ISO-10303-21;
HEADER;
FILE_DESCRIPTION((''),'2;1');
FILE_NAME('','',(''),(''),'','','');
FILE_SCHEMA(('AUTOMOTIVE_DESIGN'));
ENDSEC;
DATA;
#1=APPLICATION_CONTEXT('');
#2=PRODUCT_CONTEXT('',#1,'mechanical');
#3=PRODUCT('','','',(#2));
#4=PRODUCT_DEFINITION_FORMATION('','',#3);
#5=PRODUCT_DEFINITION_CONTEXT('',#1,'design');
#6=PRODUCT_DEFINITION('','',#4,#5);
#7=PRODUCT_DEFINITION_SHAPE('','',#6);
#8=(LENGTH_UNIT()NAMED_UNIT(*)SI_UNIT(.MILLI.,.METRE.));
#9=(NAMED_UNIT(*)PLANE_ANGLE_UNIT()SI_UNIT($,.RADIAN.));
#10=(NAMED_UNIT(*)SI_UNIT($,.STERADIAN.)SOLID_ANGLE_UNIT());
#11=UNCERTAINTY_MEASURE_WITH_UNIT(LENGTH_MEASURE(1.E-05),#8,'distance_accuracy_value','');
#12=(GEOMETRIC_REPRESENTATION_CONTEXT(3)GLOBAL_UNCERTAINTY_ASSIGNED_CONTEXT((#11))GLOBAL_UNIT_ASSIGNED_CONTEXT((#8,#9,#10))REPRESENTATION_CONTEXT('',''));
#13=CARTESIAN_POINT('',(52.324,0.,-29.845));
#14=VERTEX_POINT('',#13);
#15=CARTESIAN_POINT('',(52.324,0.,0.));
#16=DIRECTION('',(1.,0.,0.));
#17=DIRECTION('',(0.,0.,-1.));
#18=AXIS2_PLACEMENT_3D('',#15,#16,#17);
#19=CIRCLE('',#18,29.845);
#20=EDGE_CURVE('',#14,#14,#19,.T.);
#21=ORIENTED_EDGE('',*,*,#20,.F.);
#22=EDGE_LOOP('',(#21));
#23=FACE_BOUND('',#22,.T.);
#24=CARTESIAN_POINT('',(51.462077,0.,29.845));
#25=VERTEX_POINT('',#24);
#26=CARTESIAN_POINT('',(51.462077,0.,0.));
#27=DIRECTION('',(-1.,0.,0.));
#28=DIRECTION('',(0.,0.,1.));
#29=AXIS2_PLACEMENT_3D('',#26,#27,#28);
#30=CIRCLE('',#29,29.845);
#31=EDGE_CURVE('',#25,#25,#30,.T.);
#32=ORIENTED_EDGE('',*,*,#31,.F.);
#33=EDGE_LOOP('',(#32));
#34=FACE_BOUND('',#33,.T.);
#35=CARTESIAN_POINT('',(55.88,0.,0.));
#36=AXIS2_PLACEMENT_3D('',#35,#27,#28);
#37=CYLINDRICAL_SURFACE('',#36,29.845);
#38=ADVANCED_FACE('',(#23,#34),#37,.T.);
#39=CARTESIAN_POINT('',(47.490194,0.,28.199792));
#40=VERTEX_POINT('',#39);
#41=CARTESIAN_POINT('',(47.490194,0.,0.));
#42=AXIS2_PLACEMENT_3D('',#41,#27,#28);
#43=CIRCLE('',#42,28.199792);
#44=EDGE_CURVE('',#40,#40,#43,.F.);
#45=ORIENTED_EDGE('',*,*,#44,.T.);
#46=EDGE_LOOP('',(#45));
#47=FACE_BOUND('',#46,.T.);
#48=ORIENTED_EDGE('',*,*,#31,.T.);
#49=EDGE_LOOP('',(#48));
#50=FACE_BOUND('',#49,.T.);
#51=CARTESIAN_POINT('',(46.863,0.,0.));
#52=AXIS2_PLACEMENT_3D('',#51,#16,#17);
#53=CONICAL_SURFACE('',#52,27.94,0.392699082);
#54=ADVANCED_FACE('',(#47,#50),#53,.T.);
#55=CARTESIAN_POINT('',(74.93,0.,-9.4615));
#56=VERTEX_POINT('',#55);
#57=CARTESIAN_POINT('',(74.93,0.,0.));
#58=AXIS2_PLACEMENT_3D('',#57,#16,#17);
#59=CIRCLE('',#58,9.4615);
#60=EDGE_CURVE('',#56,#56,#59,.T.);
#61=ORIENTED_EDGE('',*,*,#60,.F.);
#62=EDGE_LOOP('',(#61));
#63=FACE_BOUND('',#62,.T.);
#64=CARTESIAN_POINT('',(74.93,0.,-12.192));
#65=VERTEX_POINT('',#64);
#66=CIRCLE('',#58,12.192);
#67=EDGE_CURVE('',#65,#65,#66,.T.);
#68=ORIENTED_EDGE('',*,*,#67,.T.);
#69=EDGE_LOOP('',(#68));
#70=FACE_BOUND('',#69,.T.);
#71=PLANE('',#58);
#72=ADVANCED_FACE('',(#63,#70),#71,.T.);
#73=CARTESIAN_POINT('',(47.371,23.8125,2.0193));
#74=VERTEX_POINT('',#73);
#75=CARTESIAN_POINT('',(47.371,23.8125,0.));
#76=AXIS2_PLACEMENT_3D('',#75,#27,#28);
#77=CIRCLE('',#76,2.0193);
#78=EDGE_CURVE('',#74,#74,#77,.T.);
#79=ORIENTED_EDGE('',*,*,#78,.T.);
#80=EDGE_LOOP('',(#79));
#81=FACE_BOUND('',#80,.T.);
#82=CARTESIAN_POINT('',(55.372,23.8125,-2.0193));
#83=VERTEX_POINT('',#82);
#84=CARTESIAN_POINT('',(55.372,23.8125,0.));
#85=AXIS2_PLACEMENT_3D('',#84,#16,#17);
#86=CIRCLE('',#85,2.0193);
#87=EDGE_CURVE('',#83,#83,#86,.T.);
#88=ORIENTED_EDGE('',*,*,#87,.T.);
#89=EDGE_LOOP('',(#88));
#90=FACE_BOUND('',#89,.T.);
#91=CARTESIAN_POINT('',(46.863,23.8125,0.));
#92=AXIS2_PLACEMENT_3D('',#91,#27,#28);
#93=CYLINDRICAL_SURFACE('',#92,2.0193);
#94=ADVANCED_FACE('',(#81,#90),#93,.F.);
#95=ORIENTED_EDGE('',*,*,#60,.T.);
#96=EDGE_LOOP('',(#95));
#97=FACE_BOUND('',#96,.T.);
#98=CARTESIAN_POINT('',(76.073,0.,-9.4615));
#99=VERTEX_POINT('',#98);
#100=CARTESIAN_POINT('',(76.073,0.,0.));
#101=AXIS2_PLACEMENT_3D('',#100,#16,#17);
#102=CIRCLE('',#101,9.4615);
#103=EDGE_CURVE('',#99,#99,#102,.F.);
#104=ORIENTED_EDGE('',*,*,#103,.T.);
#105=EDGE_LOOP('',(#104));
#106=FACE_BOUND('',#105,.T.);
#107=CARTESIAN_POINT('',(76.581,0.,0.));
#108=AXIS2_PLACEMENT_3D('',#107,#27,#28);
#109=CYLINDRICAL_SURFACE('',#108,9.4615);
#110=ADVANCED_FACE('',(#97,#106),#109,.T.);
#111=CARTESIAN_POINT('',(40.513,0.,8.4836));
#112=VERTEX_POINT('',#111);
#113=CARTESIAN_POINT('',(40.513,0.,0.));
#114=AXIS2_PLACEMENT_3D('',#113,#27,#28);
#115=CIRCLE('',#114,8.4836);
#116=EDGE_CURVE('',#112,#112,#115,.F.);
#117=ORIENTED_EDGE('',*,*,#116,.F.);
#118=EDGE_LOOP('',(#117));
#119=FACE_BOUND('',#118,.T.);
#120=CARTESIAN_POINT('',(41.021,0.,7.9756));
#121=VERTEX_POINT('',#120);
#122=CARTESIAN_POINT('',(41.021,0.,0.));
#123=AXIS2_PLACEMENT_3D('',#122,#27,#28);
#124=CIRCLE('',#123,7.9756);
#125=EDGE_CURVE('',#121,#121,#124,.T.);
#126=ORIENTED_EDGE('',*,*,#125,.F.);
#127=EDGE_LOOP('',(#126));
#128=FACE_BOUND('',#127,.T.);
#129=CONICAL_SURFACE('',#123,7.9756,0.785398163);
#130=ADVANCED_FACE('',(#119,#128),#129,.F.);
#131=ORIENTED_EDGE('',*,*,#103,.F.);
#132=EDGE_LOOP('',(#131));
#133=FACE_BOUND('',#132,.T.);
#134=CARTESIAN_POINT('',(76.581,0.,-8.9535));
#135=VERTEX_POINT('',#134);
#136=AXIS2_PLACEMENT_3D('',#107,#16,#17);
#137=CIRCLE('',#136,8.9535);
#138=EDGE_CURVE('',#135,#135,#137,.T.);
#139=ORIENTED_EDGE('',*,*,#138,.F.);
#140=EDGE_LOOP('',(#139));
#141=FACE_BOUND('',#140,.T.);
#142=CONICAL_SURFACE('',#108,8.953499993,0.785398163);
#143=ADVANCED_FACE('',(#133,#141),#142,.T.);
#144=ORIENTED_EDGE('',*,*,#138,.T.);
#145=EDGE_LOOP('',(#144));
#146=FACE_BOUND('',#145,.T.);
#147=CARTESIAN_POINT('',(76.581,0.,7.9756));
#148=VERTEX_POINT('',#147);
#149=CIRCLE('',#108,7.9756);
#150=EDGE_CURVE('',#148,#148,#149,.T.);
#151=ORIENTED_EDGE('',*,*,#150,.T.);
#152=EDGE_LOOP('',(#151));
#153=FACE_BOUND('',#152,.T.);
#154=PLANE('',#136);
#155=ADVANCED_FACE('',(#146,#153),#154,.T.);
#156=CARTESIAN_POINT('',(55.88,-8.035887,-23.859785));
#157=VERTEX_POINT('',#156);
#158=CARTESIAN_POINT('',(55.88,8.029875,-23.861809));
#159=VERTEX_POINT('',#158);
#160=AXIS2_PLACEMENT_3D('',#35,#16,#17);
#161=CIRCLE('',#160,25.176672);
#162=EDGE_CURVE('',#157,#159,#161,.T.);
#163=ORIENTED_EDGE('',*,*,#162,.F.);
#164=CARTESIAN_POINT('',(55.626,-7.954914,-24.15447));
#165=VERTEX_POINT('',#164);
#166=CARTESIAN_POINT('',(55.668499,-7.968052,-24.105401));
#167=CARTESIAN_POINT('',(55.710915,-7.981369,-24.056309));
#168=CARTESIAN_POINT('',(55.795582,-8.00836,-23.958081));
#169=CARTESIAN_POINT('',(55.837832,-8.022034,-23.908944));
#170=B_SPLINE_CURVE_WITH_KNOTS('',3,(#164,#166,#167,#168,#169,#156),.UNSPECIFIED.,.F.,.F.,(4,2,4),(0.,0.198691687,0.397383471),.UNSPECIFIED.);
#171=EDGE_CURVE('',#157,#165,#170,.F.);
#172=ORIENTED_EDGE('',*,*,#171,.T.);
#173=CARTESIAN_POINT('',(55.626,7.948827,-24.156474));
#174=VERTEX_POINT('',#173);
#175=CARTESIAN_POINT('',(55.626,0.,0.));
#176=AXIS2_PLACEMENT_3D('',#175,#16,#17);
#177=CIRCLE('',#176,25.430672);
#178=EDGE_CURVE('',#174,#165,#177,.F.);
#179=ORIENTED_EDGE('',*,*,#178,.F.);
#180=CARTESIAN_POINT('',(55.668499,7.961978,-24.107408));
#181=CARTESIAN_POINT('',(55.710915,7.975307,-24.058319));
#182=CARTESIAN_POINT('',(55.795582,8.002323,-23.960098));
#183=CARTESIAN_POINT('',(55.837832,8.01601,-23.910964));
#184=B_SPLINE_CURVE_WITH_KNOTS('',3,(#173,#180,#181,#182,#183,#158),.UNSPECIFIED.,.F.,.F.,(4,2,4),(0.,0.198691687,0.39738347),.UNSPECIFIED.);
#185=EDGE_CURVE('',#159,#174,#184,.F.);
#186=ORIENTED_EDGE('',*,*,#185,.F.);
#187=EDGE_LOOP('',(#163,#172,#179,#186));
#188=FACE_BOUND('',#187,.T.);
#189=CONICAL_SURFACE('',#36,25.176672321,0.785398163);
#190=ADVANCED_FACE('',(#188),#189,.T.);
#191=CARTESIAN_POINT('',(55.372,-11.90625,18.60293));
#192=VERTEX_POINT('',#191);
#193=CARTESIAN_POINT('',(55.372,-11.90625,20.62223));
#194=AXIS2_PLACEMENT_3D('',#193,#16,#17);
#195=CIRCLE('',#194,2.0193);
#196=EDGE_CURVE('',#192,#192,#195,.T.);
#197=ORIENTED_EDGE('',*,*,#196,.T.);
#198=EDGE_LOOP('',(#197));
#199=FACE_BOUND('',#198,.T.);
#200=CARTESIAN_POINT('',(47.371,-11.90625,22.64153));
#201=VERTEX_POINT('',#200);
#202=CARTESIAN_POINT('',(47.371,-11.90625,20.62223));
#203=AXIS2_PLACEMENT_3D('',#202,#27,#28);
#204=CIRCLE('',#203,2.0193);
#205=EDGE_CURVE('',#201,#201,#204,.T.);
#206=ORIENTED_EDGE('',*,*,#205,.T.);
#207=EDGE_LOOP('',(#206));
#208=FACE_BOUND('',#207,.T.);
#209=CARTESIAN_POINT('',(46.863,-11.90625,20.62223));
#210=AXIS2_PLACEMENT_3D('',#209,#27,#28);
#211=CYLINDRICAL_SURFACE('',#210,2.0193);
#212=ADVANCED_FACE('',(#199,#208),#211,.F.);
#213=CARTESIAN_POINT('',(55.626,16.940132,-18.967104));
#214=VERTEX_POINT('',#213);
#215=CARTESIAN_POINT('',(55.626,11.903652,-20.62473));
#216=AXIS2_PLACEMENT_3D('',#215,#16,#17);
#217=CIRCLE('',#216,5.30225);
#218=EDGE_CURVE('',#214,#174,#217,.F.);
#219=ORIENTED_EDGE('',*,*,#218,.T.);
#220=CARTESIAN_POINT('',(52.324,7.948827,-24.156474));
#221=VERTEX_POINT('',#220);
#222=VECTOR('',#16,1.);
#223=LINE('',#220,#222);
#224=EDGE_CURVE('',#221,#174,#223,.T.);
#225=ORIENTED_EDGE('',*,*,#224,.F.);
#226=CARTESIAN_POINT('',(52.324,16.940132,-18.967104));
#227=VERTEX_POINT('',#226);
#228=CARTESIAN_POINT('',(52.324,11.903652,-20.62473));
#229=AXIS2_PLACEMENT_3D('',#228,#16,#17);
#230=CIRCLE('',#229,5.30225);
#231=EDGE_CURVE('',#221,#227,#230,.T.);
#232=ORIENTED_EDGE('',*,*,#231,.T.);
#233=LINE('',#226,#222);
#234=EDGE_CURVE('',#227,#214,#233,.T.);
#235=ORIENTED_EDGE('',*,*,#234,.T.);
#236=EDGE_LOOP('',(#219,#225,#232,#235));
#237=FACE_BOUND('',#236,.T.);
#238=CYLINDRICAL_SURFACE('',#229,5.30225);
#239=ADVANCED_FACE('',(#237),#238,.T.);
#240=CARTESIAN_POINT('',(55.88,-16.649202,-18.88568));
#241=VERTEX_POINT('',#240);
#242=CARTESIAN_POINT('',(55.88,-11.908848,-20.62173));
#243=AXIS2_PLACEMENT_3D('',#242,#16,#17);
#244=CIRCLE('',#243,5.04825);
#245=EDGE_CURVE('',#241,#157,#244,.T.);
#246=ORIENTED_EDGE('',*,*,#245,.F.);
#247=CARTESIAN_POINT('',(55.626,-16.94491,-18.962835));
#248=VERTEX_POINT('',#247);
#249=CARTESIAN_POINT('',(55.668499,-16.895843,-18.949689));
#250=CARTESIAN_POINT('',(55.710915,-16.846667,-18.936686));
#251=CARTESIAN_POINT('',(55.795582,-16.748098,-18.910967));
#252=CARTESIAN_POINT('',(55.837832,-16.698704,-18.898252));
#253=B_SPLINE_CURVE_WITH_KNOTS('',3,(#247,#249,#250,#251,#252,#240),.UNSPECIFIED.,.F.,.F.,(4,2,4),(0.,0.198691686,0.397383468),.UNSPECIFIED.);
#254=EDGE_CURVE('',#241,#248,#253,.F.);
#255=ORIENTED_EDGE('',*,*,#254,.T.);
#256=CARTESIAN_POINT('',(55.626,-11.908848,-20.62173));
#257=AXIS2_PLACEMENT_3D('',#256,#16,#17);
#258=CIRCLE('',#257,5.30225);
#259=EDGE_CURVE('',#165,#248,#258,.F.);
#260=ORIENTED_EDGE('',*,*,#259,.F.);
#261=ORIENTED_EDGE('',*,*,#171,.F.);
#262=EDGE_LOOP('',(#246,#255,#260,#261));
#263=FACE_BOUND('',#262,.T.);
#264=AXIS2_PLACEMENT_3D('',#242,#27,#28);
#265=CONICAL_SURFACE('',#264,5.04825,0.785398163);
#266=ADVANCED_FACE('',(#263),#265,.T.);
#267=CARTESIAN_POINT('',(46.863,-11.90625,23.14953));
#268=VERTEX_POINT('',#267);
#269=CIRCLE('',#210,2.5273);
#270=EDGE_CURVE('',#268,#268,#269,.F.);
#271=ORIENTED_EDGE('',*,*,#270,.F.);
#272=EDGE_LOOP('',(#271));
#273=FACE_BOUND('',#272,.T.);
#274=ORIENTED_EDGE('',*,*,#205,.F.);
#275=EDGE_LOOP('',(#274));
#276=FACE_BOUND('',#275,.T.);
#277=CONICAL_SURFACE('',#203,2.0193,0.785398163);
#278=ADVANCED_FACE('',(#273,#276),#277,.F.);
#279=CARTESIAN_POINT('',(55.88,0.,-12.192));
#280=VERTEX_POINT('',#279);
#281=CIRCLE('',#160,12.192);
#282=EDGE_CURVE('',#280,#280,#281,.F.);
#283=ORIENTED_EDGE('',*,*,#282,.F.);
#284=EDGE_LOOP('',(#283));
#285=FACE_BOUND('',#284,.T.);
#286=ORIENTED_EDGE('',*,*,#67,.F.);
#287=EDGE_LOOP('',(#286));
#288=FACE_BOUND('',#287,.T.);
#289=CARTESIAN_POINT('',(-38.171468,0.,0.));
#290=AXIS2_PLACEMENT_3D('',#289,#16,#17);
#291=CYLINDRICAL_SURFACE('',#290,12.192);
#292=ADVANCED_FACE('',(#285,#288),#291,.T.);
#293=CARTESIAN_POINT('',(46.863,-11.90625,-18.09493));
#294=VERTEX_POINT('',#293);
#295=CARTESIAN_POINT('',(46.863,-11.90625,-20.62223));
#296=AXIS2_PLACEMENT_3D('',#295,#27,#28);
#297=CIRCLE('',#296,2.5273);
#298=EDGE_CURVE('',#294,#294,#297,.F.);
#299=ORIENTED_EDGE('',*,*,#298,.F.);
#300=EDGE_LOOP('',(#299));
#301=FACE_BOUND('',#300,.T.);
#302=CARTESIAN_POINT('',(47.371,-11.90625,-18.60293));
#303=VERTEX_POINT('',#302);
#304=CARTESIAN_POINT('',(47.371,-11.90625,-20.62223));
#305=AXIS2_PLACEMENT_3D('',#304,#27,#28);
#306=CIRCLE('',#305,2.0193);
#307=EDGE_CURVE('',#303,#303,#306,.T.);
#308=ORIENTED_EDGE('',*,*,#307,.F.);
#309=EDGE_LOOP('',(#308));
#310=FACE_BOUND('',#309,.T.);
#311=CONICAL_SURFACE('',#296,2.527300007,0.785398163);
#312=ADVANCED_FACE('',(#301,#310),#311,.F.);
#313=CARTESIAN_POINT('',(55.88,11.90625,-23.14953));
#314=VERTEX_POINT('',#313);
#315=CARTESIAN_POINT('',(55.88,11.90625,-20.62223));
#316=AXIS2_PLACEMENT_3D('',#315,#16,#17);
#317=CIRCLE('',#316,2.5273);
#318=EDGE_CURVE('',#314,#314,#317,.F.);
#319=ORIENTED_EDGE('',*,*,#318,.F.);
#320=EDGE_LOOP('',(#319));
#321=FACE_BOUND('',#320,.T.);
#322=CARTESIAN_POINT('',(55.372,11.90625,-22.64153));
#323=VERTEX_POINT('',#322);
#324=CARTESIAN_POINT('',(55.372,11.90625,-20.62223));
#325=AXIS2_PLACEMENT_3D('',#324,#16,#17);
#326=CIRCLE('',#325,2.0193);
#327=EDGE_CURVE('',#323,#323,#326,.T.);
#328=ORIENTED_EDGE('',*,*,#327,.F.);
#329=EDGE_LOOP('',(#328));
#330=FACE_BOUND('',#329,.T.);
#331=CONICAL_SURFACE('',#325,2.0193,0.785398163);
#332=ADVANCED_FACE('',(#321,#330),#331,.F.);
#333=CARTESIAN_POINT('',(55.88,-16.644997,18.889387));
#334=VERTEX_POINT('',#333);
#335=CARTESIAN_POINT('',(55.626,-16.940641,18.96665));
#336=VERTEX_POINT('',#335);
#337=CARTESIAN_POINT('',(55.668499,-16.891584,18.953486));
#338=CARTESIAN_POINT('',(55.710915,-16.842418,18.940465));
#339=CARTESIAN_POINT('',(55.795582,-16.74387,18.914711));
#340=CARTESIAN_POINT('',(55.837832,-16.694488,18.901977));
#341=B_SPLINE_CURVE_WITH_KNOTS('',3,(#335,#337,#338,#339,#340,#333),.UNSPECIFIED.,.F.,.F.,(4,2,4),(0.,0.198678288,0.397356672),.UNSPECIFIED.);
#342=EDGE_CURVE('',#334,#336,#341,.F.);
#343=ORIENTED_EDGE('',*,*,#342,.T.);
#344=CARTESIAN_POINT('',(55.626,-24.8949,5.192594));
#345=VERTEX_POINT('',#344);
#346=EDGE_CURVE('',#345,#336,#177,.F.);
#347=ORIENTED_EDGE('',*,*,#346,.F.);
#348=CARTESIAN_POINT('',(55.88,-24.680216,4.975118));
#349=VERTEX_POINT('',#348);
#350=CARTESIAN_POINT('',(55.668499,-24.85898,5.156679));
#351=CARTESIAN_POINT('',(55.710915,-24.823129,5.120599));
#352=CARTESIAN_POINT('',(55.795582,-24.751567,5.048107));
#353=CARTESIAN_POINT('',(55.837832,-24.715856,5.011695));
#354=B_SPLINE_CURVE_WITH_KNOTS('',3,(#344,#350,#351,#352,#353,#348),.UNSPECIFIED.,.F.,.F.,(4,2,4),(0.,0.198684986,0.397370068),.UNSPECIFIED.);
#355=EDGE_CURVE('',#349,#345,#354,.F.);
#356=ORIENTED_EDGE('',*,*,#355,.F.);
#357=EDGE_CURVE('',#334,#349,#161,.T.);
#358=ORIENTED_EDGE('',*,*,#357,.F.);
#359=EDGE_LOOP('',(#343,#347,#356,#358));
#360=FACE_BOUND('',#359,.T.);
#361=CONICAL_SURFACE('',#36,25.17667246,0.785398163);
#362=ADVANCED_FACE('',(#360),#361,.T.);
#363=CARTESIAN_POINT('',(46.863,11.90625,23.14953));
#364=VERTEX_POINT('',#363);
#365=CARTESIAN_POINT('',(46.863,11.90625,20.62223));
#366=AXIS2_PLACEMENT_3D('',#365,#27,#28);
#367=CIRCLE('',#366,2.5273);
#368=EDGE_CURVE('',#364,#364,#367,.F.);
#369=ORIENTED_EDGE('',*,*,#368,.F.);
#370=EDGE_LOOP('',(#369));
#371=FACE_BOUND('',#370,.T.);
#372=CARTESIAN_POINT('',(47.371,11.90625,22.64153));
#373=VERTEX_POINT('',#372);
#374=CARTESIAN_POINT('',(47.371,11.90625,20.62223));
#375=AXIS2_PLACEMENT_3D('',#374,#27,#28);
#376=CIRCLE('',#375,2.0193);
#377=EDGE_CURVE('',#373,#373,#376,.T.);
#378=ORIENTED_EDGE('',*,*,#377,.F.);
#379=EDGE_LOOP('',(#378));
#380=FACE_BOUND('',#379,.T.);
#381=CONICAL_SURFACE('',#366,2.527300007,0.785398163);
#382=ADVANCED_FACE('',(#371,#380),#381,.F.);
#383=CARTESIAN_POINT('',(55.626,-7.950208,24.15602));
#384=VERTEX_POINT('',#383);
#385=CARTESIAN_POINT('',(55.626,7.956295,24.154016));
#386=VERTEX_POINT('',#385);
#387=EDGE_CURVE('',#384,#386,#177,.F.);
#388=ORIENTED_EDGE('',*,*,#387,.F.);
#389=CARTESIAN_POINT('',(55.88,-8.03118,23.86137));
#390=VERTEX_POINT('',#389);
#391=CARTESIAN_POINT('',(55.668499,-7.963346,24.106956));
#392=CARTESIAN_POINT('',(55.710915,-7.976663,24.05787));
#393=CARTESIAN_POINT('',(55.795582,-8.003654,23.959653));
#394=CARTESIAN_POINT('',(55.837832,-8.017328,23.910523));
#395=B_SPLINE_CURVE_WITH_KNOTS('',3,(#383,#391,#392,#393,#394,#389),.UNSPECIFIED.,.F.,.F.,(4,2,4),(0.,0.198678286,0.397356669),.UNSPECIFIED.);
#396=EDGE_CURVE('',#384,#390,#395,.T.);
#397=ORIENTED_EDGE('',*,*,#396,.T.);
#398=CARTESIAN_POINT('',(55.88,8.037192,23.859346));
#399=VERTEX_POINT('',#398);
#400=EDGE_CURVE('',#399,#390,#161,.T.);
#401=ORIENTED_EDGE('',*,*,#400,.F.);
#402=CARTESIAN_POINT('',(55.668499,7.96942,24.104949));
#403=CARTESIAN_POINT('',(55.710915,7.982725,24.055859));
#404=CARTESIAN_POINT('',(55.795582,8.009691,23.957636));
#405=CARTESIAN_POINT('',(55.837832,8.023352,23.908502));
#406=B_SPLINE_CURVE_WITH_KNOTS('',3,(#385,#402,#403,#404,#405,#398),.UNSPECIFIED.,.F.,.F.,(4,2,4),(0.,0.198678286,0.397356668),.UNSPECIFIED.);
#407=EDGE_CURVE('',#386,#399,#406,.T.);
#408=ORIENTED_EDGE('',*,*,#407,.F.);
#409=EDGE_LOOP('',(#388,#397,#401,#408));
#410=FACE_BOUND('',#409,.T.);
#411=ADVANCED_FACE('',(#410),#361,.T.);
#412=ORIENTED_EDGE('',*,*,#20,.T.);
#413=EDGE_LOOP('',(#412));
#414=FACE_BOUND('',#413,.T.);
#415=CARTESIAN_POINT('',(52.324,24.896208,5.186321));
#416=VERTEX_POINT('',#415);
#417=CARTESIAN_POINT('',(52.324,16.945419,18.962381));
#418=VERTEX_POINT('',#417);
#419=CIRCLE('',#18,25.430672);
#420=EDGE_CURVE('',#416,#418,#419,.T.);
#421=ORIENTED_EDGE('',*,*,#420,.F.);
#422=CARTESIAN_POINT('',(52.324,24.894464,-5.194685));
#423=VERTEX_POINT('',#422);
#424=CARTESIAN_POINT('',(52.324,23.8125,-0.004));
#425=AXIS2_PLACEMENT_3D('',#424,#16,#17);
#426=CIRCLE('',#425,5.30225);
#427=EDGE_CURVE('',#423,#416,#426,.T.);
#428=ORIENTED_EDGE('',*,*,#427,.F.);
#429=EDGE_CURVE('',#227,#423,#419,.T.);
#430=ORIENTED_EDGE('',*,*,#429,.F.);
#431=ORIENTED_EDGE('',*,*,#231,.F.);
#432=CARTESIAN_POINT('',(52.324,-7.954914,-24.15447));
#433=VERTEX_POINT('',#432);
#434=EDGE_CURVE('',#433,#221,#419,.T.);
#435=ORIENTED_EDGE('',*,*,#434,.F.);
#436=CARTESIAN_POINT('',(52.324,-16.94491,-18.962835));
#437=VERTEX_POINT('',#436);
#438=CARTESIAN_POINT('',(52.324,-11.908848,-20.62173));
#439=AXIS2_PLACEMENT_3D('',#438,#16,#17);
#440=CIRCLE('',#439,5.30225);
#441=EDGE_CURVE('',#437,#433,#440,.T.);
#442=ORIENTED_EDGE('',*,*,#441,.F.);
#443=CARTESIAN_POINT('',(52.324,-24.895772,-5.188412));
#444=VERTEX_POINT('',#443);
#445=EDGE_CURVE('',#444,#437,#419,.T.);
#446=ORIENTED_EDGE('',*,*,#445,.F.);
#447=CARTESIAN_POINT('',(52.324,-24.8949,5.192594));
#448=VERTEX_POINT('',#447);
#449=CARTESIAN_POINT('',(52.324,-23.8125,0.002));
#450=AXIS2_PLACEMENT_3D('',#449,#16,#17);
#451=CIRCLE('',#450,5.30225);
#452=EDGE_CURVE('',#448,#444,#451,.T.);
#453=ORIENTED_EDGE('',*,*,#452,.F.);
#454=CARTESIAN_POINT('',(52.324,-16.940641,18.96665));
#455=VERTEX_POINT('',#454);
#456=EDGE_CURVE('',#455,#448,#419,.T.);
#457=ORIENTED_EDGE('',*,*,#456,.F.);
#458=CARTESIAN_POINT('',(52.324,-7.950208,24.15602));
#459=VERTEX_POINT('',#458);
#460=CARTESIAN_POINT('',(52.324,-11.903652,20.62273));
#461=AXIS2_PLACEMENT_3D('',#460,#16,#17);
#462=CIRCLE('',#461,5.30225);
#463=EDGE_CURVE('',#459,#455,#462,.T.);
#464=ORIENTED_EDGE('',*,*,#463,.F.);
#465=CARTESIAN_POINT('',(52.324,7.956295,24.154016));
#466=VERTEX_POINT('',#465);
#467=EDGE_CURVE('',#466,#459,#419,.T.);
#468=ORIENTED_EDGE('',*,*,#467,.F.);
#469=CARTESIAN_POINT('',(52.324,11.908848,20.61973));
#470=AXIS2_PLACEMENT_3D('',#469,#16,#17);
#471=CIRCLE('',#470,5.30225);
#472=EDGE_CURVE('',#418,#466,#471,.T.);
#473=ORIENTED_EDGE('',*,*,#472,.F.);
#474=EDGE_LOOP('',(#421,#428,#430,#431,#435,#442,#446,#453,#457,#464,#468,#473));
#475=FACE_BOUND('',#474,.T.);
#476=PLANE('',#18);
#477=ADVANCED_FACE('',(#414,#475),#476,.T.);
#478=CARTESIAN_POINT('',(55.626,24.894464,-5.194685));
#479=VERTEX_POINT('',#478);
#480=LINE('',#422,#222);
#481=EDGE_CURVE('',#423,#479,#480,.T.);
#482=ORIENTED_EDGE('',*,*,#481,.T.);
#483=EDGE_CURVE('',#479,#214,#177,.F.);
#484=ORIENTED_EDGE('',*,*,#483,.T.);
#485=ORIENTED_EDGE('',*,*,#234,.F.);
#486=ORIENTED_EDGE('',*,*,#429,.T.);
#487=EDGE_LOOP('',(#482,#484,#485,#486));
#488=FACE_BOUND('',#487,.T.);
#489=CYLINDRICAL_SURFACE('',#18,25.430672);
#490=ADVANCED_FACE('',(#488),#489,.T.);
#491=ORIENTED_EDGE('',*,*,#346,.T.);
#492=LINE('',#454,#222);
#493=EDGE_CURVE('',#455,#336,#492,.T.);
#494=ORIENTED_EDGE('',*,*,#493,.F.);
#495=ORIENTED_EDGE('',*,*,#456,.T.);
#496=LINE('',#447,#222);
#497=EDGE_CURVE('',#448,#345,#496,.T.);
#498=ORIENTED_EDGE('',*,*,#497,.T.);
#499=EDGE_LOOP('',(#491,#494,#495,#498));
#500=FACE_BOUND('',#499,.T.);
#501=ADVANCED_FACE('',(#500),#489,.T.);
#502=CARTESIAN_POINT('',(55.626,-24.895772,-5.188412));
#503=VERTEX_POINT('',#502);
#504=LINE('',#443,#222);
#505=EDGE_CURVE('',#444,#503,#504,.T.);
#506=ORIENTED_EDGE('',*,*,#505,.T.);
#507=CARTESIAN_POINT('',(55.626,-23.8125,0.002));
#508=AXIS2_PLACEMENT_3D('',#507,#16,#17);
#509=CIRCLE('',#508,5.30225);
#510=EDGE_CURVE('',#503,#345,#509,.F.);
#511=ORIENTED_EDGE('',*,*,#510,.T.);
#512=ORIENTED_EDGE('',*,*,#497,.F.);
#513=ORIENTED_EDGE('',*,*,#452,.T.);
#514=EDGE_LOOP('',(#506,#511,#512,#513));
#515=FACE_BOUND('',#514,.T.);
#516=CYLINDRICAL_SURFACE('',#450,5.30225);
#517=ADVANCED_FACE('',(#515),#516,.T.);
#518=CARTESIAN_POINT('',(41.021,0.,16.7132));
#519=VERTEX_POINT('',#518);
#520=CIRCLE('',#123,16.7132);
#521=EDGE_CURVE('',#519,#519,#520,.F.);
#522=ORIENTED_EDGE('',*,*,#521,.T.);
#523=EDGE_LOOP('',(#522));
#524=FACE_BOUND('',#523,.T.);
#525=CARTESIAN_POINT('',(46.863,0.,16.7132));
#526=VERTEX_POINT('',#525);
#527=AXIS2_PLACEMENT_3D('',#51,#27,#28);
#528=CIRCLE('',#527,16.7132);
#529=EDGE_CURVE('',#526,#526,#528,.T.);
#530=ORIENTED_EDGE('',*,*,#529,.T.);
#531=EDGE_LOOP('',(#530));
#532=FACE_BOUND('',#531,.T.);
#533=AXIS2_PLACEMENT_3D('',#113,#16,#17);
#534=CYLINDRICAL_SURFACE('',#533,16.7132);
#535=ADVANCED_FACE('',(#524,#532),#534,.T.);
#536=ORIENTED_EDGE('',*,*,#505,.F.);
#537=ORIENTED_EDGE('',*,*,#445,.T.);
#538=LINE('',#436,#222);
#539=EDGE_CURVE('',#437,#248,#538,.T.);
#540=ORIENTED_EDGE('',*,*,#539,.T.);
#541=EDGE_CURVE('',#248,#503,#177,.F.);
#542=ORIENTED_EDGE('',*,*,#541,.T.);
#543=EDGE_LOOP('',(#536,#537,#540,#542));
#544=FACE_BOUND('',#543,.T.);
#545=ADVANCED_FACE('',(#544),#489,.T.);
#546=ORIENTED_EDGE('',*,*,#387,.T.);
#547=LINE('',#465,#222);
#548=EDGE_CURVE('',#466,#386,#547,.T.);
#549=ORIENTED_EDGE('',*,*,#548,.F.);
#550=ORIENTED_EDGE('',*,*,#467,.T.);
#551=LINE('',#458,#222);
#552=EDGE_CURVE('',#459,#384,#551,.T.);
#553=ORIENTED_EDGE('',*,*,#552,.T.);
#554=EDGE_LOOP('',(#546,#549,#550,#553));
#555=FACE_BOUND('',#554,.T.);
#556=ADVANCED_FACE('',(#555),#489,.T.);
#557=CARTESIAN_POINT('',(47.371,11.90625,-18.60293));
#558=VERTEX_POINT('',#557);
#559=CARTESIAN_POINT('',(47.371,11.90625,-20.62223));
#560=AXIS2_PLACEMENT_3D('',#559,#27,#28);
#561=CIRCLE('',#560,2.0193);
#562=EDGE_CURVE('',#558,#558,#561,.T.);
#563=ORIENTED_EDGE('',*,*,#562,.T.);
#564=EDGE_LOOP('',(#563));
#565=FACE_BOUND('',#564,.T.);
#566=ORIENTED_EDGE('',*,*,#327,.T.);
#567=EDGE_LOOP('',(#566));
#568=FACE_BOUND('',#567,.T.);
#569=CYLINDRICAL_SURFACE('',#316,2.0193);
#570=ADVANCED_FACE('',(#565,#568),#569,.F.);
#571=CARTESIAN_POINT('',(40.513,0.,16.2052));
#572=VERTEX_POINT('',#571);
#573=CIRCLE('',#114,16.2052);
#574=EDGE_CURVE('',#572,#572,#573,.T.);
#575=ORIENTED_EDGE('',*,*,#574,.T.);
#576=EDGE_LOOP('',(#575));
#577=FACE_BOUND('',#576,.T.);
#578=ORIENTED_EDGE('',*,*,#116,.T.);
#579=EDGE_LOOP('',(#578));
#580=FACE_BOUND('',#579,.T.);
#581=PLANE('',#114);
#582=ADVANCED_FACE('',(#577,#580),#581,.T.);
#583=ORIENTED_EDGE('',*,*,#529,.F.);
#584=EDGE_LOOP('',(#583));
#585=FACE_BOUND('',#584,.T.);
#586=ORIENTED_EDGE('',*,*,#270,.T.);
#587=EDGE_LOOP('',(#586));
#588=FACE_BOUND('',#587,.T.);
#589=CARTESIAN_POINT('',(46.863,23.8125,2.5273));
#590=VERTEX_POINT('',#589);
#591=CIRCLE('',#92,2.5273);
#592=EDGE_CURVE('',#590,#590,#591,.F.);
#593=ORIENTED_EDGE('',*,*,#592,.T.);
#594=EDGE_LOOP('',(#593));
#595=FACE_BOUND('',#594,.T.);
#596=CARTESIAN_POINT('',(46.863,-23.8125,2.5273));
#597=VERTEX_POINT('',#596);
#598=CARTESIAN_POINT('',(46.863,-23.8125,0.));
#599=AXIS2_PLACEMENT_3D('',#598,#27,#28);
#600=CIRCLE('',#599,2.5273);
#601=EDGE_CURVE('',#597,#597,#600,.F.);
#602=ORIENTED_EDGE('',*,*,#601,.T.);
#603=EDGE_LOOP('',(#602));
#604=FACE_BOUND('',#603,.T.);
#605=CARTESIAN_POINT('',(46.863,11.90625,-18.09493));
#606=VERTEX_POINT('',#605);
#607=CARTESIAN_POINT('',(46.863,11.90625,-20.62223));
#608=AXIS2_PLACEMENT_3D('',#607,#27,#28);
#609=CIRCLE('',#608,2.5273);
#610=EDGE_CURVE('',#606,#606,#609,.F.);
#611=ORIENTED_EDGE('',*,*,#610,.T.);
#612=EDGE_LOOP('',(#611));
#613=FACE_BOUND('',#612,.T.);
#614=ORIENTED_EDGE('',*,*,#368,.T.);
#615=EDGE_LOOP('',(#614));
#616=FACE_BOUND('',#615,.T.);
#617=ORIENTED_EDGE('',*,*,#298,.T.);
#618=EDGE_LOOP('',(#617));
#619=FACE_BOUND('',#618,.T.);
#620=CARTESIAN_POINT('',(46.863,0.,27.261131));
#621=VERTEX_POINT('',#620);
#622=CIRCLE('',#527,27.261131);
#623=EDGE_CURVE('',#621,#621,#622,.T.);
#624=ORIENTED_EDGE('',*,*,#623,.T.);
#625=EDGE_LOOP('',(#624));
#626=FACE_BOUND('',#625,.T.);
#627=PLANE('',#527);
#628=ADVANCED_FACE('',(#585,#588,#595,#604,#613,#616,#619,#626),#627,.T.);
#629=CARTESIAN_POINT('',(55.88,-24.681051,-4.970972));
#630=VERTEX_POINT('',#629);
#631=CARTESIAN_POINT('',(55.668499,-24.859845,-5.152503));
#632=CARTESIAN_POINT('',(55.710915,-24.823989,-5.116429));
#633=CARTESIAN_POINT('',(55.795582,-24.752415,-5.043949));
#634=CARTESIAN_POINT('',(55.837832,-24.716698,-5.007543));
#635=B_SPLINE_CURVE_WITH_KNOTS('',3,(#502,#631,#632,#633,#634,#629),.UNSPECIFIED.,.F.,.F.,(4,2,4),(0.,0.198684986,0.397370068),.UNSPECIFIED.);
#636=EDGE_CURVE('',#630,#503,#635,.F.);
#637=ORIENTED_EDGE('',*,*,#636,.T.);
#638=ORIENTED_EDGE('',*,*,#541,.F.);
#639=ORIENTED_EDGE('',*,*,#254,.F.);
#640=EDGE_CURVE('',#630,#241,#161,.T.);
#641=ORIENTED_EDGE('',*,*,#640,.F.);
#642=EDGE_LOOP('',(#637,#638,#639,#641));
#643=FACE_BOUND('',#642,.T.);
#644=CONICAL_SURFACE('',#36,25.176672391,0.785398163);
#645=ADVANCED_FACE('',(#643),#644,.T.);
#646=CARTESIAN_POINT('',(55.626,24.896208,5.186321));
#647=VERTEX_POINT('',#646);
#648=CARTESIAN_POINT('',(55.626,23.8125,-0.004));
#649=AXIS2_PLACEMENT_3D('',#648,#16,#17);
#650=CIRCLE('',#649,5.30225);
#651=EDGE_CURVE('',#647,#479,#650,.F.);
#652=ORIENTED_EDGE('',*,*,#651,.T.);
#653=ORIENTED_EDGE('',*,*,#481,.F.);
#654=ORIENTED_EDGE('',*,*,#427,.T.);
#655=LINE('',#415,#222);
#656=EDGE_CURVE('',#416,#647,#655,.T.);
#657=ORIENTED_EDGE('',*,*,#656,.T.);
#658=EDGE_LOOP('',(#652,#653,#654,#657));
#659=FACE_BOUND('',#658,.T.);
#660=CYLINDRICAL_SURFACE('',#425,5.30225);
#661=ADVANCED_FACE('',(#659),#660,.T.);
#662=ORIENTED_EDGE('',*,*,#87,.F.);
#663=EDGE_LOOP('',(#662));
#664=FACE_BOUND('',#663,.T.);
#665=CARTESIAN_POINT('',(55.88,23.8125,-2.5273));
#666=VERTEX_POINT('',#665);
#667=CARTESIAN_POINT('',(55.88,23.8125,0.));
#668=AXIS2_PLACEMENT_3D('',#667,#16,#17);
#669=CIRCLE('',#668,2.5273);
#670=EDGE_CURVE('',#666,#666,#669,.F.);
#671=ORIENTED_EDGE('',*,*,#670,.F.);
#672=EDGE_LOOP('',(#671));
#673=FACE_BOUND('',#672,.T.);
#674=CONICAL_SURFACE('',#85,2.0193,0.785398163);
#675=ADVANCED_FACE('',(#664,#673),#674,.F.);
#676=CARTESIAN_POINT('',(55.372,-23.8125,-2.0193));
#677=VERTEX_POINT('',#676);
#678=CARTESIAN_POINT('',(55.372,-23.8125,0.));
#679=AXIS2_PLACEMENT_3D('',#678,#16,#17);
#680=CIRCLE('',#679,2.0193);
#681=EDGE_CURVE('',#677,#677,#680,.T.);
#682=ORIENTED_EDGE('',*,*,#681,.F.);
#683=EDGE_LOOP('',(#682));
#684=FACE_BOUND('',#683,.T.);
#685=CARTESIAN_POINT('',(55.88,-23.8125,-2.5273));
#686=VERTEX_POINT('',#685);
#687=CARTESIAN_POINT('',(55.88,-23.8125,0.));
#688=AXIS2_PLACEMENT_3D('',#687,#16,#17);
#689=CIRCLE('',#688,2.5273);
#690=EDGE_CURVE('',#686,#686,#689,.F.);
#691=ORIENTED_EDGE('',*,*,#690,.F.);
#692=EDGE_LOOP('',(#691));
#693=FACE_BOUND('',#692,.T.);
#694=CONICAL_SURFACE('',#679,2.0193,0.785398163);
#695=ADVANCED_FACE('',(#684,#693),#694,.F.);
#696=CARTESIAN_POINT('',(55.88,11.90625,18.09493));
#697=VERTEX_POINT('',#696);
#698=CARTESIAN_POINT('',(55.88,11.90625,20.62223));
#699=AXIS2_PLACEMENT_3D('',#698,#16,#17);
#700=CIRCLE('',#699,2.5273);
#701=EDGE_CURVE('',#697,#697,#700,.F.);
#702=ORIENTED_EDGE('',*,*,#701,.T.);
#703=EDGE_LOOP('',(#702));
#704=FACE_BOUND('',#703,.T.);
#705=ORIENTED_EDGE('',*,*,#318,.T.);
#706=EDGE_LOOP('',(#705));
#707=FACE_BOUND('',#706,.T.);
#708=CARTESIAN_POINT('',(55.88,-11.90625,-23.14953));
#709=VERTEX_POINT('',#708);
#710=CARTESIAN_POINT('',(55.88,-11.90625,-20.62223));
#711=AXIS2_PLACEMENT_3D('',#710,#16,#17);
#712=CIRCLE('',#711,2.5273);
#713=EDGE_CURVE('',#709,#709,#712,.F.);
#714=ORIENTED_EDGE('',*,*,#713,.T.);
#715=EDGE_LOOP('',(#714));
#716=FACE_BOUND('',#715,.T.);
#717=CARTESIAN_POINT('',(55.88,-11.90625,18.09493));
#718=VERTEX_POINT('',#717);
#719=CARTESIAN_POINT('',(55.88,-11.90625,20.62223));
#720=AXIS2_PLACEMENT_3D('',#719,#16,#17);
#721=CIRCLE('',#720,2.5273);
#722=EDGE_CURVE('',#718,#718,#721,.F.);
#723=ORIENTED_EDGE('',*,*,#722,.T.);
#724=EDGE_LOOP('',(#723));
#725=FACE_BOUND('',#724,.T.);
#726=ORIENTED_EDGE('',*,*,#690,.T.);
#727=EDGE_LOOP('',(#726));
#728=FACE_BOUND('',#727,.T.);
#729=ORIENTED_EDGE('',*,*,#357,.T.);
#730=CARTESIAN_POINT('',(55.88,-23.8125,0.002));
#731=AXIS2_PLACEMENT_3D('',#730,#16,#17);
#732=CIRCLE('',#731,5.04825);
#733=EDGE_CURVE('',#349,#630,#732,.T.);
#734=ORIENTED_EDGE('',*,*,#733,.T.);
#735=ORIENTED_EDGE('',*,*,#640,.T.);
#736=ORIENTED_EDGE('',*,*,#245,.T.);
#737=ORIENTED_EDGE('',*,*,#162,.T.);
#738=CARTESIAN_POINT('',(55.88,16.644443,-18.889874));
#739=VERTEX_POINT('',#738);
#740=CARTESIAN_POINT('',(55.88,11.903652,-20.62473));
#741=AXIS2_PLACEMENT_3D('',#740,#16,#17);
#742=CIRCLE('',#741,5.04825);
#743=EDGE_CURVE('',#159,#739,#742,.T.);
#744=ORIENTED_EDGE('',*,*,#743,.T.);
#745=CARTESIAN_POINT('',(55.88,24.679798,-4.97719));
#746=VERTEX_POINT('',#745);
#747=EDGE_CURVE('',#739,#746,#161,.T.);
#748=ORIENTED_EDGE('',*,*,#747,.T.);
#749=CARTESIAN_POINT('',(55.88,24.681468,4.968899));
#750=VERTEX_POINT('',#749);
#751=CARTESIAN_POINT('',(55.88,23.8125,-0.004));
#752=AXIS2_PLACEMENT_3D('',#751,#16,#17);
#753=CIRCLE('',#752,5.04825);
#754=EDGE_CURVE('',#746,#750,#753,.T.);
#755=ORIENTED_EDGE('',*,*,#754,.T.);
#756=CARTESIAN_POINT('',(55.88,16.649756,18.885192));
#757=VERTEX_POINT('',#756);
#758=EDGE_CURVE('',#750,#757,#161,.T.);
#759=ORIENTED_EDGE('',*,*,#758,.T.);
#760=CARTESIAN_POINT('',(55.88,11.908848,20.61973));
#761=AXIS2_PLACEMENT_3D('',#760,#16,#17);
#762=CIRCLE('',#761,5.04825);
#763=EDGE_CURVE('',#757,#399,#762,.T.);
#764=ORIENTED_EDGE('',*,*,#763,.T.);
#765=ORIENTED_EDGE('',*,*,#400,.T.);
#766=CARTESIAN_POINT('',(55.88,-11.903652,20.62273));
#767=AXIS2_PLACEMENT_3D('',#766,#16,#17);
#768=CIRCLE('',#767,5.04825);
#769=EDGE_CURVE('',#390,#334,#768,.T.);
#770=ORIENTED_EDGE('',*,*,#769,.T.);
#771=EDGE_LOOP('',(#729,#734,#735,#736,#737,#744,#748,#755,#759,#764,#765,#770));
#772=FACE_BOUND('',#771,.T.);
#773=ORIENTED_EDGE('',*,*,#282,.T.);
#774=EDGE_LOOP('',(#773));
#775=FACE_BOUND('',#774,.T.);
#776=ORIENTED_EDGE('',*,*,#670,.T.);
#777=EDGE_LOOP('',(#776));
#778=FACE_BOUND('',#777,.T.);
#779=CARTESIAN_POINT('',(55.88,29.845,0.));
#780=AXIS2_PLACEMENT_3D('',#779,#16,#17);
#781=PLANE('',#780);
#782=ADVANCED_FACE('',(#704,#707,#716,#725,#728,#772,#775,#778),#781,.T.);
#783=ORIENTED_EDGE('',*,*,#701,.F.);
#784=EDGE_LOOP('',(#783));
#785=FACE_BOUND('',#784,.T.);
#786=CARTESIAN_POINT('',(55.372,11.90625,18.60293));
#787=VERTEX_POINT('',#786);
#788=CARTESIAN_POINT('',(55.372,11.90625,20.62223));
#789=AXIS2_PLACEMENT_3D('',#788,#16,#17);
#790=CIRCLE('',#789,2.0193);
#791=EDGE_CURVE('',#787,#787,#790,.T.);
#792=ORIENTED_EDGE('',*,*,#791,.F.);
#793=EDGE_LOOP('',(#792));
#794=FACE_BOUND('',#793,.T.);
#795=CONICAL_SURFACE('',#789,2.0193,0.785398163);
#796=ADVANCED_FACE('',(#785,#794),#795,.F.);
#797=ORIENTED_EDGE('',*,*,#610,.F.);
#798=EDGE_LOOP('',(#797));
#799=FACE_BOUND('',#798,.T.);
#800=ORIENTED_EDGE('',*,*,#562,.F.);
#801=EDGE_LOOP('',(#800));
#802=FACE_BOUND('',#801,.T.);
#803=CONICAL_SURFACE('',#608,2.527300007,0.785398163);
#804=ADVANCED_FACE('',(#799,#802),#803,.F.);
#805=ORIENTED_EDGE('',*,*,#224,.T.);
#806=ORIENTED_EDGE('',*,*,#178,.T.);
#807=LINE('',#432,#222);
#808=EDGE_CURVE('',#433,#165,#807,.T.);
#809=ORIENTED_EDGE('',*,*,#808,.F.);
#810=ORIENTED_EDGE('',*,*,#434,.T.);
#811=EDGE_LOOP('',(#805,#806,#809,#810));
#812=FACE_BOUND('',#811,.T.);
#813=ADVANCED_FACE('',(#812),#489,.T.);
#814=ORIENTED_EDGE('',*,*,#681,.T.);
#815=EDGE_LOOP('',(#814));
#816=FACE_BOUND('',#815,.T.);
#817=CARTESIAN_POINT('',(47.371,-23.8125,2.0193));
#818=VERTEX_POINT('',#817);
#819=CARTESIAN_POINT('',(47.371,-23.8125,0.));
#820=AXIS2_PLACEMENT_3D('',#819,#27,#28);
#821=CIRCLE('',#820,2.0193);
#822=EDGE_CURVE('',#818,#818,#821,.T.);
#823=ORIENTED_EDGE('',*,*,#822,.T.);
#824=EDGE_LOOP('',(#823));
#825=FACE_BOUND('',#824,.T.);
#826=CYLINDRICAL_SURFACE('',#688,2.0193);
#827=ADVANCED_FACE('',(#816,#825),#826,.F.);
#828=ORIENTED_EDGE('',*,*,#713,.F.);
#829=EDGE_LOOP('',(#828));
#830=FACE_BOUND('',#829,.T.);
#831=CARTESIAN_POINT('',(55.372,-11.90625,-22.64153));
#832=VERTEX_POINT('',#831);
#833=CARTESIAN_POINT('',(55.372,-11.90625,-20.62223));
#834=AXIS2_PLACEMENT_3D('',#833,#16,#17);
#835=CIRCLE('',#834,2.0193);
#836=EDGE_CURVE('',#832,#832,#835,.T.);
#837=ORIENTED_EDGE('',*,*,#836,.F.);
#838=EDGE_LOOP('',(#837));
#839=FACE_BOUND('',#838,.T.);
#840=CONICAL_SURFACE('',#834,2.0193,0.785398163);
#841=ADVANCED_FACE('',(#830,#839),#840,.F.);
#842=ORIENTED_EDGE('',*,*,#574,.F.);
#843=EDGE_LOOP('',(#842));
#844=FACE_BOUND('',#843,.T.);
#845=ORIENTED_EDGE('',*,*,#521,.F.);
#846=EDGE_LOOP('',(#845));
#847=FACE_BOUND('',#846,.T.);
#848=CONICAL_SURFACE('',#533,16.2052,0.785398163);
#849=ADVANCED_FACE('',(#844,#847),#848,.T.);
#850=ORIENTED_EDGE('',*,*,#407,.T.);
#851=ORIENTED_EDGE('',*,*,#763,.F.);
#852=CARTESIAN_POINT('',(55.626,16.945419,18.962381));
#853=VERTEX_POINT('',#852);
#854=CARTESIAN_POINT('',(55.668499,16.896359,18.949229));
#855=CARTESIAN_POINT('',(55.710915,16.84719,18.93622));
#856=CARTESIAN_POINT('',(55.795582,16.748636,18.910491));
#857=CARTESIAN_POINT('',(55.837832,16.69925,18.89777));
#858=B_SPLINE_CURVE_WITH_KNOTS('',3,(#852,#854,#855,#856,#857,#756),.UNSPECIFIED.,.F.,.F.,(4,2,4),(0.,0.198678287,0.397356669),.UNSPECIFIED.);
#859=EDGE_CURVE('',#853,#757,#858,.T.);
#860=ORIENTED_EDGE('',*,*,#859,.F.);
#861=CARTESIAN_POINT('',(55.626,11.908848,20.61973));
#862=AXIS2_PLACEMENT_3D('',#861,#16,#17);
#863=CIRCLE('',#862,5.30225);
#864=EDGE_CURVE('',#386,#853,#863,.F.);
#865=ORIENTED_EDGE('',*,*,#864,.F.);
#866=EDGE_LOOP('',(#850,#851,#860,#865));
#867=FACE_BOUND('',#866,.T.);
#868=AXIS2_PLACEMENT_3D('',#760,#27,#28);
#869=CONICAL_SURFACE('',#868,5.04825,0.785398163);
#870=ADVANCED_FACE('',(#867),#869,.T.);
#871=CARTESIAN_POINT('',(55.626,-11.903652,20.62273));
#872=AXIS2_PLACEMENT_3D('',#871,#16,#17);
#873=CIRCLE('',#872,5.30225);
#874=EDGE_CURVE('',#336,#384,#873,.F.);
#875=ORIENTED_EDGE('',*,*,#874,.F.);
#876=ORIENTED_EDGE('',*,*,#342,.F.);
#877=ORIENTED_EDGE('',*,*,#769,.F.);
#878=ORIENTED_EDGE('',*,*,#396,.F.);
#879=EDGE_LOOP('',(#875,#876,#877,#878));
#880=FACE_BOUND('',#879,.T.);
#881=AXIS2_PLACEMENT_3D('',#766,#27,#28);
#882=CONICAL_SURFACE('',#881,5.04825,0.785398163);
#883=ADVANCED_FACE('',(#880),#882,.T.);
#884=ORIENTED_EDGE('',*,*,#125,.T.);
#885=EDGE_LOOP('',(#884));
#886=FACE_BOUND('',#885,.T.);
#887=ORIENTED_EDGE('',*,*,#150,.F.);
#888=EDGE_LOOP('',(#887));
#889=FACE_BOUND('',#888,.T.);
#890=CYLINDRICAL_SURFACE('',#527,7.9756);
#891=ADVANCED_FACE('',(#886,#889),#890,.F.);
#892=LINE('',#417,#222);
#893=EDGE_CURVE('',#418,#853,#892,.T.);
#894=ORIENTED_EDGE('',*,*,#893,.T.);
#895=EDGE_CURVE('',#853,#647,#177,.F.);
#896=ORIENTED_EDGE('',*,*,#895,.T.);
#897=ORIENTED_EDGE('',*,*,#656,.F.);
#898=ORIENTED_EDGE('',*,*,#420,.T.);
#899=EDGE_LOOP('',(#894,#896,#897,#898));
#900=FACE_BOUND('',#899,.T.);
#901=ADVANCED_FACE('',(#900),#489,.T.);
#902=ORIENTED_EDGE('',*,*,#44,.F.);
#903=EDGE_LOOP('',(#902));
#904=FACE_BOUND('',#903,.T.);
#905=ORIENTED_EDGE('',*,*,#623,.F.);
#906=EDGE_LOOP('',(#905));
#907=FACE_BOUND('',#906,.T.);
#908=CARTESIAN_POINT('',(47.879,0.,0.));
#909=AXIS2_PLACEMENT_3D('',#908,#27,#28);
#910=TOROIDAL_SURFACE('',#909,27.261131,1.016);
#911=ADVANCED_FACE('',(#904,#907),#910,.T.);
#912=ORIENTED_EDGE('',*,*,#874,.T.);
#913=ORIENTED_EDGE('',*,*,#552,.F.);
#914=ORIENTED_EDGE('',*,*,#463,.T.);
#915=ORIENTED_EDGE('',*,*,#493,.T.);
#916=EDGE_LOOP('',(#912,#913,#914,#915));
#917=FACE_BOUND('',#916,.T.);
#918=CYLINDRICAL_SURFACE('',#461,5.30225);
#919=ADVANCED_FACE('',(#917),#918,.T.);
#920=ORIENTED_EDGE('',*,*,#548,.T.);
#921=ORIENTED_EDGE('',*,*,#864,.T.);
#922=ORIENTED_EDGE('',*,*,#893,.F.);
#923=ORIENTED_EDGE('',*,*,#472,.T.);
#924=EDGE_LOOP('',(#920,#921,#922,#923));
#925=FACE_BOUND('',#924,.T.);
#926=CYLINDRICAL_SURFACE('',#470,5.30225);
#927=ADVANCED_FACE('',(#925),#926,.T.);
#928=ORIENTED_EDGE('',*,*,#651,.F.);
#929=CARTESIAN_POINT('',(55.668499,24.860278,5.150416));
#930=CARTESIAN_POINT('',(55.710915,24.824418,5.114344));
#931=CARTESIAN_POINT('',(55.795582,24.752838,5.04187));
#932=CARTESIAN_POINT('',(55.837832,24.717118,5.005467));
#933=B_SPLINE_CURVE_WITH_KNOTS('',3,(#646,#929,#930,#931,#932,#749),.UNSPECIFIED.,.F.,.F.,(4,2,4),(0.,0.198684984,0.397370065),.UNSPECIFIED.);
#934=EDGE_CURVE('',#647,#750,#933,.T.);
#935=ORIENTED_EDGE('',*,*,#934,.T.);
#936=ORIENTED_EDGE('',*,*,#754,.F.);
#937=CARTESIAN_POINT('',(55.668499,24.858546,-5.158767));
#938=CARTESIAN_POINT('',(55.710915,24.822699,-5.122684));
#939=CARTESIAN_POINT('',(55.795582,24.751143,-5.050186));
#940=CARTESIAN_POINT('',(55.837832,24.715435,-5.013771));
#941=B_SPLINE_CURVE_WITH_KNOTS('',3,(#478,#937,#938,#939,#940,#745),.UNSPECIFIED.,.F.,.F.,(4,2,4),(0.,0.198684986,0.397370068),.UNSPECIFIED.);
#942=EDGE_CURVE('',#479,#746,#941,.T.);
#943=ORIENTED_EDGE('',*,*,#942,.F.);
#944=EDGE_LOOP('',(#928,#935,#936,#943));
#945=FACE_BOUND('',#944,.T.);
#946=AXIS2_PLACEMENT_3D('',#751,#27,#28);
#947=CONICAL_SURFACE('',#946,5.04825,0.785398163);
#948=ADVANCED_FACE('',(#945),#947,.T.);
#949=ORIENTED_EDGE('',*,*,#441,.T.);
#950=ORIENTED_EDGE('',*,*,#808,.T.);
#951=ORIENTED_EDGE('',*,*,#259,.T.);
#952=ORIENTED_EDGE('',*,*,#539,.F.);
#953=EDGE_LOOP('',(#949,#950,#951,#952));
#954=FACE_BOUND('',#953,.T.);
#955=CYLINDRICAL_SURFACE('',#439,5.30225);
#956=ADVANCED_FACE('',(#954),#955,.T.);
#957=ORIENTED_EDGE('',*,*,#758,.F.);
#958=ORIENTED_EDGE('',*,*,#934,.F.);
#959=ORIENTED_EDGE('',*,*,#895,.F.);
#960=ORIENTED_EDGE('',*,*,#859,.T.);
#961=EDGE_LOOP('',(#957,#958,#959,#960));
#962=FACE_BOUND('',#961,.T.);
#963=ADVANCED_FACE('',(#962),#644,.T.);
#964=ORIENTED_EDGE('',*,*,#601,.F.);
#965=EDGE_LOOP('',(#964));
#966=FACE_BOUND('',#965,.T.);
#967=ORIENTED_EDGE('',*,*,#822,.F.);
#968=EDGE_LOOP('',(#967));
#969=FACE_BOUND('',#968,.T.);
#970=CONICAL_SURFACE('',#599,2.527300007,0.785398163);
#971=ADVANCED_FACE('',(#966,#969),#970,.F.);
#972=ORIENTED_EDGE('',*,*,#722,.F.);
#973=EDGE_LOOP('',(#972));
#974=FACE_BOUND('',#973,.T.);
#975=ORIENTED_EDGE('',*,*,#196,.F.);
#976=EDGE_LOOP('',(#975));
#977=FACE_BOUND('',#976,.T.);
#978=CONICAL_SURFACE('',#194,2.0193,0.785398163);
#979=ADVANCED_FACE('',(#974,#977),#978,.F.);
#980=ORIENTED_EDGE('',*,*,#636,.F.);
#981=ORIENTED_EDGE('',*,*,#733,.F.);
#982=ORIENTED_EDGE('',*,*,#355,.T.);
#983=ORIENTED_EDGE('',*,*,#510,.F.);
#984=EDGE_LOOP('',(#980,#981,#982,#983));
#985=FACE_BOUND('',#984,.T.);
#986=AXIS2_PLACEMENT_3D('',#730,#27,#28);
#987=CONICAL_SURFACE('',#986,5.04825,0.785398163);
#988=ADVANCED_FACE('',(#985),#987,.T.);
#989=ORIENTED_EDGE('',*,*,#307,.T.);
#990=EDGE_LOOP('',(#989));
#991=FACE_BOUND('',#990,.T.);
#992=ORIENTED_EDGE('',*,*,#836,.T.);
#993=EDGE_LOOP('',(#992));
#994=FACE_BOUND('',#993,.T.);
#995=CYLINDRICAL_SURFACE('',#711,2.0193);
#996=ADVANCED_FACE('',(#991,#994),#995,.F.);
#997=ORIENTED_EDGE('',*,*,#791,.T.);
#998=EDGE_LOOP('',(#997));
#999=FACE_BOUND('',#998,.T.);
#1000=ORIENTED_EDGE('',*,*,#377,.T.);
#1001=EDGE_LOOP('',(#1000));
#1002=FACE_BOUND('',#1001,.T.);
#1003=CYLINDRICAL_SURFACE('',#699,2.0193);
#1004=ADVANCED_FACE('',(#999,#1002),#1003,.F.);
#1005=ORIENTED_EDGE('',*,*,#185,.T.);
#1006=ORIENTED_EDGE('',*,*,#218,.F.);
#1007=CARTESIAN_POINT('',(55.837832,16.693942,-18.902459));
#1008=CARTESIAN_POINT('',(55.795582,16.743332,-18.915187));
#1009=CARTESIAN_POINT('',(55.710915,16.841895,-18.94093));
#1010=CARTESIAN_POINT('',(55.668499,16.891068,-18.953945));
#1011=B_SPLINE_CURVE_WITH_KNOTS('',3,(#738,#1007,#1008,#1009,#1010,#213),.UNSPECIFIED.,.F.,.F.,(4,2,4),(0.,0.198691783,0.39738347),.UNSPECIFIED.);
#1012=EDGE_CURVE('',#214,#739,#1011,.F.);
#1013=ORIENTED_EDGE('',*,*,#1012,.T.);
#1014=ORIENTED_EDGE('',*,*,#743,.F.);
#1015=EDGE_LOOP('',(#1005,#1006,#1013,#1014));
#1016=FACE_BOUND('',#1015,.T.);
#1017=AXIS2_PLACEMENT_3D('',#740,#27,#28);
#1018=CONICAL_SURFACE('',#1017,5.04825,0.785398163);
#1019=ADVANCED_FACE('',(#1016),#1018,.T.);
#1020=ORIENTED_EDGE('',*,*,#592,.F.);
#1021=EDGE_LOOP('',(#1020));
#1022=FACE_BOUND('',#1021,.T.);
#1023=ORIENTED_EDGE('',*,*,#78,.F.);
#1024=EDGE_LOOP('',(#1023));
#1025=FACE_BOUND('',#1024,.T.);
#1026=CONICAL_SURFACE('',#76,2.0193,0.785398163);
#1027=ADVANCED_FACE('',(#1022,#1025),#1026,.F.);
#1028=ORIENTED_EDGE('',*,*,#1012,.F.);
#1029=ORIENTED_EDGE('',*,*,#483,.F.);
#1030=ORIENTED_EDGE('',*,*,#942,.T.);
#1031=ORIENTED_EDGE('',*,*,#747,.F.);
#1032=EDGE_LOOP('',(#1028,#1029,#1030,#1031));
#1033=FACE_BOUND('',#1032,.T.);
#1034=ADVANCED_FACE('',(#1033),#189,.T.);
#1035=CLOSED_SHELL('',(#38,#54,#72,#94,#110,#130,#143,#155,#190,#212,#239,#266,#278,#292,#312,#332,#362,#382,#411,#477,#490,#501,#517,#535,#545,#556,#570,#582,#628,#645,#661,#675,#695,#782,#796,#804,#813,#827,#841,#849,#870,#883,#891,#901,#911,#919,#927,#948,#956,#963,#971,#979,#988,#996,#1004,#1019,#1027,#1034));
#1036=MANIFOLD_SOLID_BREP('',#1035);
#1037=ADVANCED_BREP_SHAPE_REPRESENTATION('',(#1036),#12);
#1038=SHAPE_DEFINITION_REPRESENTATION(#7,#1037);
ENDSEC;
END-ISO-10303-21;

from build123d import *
from build123d.topology import SkipClean

# Parameters (mm, degrees)
SKETCH2_R                    = 12.7635
BOSS_EXTRUDE1_DEPTH          = 19.05
SKETCH3_R                    = 9.4615
BOSS_EXTRUDE2_DEPTH          = 1.651
F_5_8_0_628_DIAMETER_HOLE1_D = 15.9512
F_21_0_159_DIAMETER_HOLE1_D  = 4.0386
F_21_0_159_DIAMETER_HOLE2_D  = 4.0386
CHAMFER1_SIZE                = 0.508000007
FILLET1_R                    = 1.016
FILLET2_R                    = 2.54
SKETCH10_R                   = 29.845
CUT_EXTRUDE1_DEPTH           = 3.556
CHAMFER3_SIZE                = 0.254
SKETCH12_R                   = 33.252215347
SKETCH12_R_2                 = 12.192
OUTSIDE_BORE_TRIM_DEPTH      = 20.701
SKETCH15_R                   = 16.7132
SKETCH15_R_2                 = 7.9756
BOSS_EXTRUDE5_DEPTH          = 6.35
CHAMFER6_SIZE                = 0.508


with BuildPart() as part:
    # Sketch1 → Revolve1 (revolve)
    with BuildSketch(Plane(origin=(0, 0, 0), x_dir=(-1, 0, 0), z_dir=(0, 0, -1)), mode=Mode.PRIVATE) as revolve1_sk:
        Polygon((-55.88, 29.845), (-55.88, 0), (-46.863, 0), (-46.863, 27.94), (-51.462076836, 29.845), align=None)
    revolve(revolve1_sk.sketch.rotate(Axis((55.88, 0, 0), (-1, 0, 0)), 270), axis=Axis((55.88, 0, 0), (-1, 0, 0)))

    # Sketch2 → Boss-Extrude1 (add)
    with BuildSketch(Plane(origin=(55.88, 0, 0), x_dir=(0, 0, -1), z_dir=(1, 0, 0))):
        with Locations(Location((0, 0, 0), (0, 0, 180))):
            Circle(SKETCH2_R)
    extrude(amount=BOSS_EXTRUDE1_DEPTH)

    # Sketch3 → Boss-Extrude2 (add)
    with BuildSketch(Plane(origin=(74.93, 0, 0), x_dir=(0, 0, -1), z_dir=(1, 0, 0))):
        Circle(SKETCH3_R)
    extrude(amount=BOSS_EXTRUDE2_DEPTH)

    # 5/8 (0.628) Diameter Hole1 (through all)
    with Locations(Plane.ZY.offset(-46.863)):
        with Locations((0, 0)):
            Hole(F_5_8_0_628_DIAMETER_HOLE1_D / 2)

    # #21 (0.159) Diameter Hole1 (through all)
    with Locations(Plane(origin=(55.88, 0, 0), x_dir=(0, 0, -1), z_dir=(1, 0, 0))):
        with Locations((-20.622229928, 11.90625), (20.622229928, 11.90625), (20.622229928, -11.90625), (0, -23.8125)):
            Hole(F_21_0_159_DIAMETER_HOLE1_D / 2)

    # #21 (0.159) Diameter Hole2 (through all)
    with Locations(Plane.ZY.offset(-46.863)):
        with Locations((20.622229928, -11.90625), (0, 23.8125)):
            Hole(F_21_0_159_DIAMETER_HOLE2_D / 2)

    # Chamfer1
    chamfer1_edges = [part.edges().sort_by_distance(p)[0] for p in [
        (74.93, 0, -12.7635),
        (76.581, 0, 9.4615),
        (55.88, -23.8125, -2.0193),
        (46.863, -23.8125, -2.0193),
        (55.88, -11.90625, -22.641529928),
        (46.863, -11.90625, -22.641529928),
        (55.88, 11.90625, -22.641529928),
        (46.863, 11.90625, -22.641529928),
        (55.88, 11.90625, 18.602929928),
        (46.863, 11.90625, 18.602929928),
        (55.88, 23.8125, 2.0193),
        (46.863, 23.8125, 2.0193),
        (55.88, -11.90625, 22.641529928),
        (46.863, -11.90625, 22.641529928),
    ]]
    chamfer(chamfer1_edges, length=CHAMFER1_SIZE)

    # Fillet1
    fillet1_edges = [part.edges().sort_by_distance(p)[0] for p in [
        (46.863, 0, -27.94),
    ]]
    fillet(fillet1_edges, radius=FILLET1_R)

    # Fillet2
    fillet2_edges = [part.edges().sort_by_distance(p)[0] for p in [
        (55.88, 0, -12.7635),
    ]]
    fillet(fillet2_edges, radius=FILLET2_R)

    # Sketch10 → Cut-Extrude1 (cut)
    with BuildSketch(Plane(origin=(55.88, 0, 0), x_dir=(0, 0, -1), z_dir=(1, 0, 0))):
        with Locations(Location((0, 0, 0), (0, 0, 180))):
            Circle(SKETCH10_R)
        with BuildLine():
            ThreePointArc((5.194684655, 24.894464178), (12.71872072, 22.021653827), (18.96710386, 16.940131795))
            ThreePointArc((18.96710386, 16.940131795), (25.217002518, 14.554101773), (24.156474078, 7.94882722))
            ThreePointArc((24.156474078, 7.94882722), (25.430672133, -0.003203872), (24.154470478, -7.954913657))
            ThreePointArc((24.154470478, -7.954913657), (25.213334557, -14.560455175), (18.962834963, -16.944910398))
            ThreePointArc((18.962834963, -16.944910398), (12.713171601, -22.024857913), (5.188411857, -24.895772345))
            ThreePointArc((5.188411857, -24.895772345), (-0.002445392, -29.114749939), (-5.19259389, -24.894900477))
            ThreePointArc((-5.19259389, -24.894900477), (-12.717500776, -22.022358557), (-18.966649715, -16.940640514))
            ThreePointArc((-18.966649715, -16.940640514), (-25.214891362, -14.55429486), (-24.156019778, -7.950208229))
            ThreePointArc((-24.156019778, -7.950208229), (-25.430672245, 0.003203856), (-24.154015788, 7.956294514))
            ThreePointArc((-24.154015788, 7.956294514), (-25.21122333, 14.560647771), (-18.962380547, 16.945418955))
            ThreePointArc((-18.962380547, 16.945418955), (-12.711951385, 22.02556217), (-5.186321013, 24.896207969))
            ThreePointArc((-5.186321013, 24.896207969), (0.004890594, 29.114749631), (5.194684655, 24.894464178))
        make_face(mode=Mode.SUBTRACT)
    extrude(amount=-CUT_EXTRUDE1_DEPTH, mode=Mode.SUBTRACT)

    # Chamfer3
    chamfer3_edges = [part.edges().sort_by_distance(p)[0] for p in [
        (55.88, 14.554101773, -25.217002518),
        (55.88, 22.021653827, -12.71872072),
        (55.88, 29.114749631, -0.004890594),
        (55.88, 22.02556217, 12.711951385),
        (55.88, 14.560647771, 25.21122333),
        (55.88, 0.003203856, 25.430672245),
        (55.88, -14.55429486, 25.214891362),
        (55.88, -22.022358557, 12.717500776),
        (55.88, -29.114749939, 0.002445392),
        (55.88, -22.024857913, -12.713171601),
        (55.88, -14.560455175, -25.213334557),
        (55.88, -0.003203872, -25.430672133),
    ]]
    chamfer(chamfer3_edges, length=CHAMFER3_SIZE)

    # Sketch12 → Outside Bore Trim (cut)
    with BuildSketch(Plane(origin=(76.581, 0, 0), x_dir=(0, 0, -1), z_dir=(1, 0, 0))):
        Circle(SKETCH12_R)
        Circle(SKETCH12_R_2, mode=Mode.SUBTRACT)
    extrude(amount=-OUTSIDE_BORE_TRIM_DEPTH, mode=Mode.SUBTRACT)

    # Sketch15 → Boss-Extrude5 (add)
    with SkipClean():  # the faces are left unmerged after this step: merging them gives an invalid solid
        with BuildSketch(Plane.ZY.offset(-46.863)):
            Circle(SKETCH15_R)
            Circle(SKETCH15_R_2, mode=Mode.SUBTRACT)
        extrude(amount=BOSS_EXTRUDE5_DEPTH)
    add(part.part.scale(1), mode=Mode.REPLACE)  # the faces are merged on a copy

    # Chamfer6
    chamfer6_edges = [part.edges().sort_by_distance(p)[0] for p in [
        (40.513, 0, -16.7132),
        (40.513, 0, -7.9756),
    ]]
    chamfer(chamfer6_edges, length=CHAMFER6_SIZE)


solid = part.part
